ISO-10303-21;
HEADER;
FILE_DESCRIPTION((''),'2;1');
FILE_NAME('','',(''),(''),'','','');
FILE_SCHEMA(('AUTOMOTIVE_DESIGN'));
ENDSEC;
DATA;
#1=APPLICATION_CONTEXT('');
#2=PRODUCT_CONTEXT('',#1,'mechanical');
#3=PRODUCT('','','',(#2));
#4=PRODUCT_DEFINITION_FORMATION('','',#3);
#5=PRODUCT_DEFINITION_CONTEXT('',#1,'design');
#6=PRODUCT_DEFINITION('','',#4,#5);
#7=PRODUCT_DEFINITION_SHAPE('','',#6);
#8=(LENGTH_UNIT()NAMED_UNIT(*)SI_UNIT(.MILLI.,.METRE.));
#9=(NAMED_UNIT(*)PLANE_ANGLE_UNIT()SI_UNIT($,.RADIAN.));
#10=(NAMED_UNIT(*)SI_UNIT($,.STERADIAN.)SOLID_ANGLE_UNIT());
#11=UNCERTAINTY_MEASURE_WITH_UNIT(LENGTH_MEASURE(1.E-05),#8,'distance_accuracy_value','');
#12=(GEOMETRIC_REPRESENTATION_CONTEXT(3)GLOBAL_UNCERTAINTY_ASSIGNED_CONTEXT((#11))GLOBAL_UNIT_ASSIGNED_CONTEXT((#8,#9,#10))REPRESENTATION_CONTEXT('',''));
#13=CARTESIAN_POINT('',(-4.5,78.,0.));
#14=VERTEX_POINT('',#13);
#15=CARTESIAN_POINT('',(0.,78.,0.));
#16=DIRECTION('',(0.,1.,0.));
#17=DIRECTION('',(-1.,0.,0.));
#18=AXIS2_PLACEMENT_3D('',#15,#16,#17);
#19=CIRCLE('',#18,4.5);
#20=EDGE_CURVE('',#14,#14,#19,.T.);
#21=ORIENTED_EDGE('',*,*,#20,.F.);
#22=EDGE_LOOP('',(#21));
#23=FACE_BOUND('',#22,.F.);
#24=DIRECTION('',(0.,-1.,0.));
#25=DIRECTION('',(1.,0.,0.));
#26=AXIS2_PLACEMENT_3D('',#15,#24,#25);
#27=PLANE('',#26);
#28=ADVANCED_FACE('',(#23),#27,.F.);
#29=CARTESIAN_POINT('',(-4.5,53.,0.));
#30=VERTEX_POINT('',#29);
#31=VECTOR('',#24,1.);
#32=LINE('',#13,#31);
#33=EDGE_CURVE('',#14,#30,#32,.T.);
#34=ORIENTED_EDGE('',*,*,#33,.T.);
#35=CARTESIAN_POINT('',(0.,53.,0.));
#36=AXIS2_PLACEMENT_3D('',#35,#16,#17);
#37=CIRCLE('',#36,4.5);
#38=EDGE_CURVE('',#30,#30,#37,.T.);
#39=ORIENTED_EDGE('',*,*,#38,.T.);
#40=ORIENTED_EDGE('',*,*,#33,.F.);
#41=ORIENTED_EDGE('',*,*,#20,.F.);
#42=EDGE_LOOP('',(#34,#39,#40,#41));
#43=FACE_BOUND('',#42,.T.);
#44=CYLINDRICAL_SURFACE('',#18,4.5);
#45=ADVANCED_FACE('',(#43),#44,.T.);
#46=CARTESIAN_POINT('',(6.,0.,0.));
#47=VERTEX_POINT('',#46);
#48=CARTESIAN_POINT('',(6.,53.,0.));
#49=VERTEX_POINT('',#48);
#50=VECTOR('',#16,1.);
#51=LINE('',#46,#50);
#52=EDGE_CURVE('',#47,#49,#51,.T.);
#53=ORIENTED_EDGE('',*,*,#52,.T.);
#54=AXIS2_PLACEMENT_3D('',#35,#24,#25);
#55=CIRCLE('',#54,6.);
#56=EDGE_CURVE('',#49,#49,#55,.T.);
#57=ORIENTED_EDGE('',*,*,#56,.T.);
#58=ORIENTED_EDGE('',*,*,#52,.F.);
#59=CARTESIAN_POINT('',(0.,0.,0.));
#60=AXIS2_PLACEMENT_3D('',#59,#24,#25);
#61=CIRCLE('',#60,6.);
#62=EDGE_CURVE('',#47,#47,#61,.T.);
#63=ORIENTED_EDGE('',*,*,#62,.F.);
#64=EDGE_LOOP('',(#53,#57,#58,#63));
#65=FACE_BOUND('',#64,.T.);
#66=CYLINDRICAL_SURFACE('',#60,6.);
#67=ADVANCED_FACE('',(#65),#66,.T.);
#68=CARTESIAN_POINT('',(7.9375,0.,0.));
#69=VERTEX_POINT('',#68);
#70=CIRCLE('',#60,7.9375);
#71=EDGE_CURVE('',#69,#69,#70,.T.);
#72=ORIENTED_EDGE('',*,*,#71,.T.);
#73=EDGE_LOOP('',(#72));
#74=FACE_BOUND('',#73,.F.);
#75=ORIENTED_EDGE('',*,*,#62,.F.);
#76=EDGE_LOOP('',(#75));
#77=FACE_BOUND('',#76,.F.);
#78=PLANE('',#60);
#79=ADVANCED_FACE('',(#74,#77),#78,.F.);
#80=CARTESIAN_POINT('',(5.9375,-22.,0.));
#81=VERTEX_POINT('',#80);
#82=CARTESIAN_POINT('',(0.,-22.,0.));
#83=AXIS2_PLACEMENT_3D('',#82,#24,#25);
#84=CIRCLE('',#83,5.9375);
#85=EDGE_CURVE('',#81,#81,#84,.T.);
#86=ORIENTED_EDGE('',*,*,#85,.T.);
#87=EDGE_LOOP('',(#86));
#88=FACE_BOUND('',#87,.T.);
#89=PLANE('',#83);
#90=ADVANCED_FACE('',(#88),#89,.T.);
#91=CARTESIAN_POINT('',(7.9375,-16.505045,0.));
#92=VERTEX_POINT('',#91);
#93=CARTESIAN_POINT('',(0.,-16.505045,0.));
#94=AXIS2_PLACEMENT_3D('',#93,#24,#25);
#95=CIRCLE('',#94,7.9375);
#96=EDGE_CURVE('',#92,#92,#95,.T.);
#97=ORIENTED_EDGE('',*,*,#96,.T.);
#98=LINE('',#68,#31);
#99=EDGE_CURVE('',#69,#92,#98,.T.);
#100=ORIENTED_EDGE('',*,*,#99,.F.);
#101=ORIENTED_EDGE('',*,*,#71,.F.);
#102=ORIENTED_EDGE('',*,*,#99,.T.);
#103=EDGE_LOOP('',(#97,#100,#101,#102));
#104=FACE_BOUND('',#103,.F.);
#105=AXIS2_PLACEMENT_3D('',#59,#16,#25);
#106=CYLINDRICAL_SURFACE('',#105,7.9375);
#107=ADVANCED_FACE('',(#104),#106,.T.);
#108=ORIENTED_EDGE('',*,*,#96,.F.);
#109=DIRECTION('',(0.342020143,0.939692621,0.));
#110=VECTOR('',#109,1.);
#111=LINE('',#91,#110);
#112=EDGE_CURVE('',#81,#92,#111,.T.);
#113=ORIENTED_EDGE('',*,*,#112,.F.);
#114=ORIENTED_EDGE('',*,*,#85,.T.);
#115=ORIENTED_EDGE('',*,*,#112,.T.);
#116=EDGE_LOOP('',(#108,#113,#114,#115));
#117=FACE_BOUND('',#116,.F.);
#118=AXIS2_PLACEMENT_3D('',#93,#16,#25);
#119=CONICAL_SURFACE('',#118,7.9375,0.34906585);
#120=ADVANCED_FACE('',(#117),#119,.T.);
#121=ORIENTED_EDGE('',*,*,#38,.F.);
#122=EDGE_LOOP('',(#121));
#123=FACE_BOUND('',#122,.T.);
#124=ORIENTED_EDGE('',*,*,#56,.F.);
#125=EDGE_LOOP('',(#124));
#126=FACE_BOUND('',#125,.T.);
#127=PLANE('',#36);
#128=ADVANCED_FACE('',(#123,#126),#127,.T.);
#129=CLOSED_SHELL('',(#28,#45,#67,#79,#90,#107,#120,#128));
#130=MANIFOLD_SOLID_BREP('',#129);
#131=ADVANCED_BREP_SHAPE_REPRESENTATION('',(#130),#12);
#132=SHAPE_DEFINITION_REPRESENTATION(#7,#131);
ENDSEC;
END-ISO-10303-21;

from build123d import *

# Parameters (mm, degrees)
F0_R     = 7.9375
F1_DEPTH = 22
F2_R     = 6
F3_DEPTH = 78
F4_R     = 6
F4_R_2   = 4.5
F5_DEPTH = 25
F6_SIZE2 = 5.4949548389
F6_SIZE  = 2


# Not quite as in the source:
# - a feature names something its author has since deleted; it is built from what else it names


with BuildPart() as f1:
    # F0 (on Front) → F1 (new body)
    with BuildSketch(Plane.XZ):
        Circle(F0_R)
    extrude(amount=F1_DEPTH)

    # F2 (on Front) → F3 (join)
    with BuildSketch(Plane.XZ):
        Circle(F2_R)
    extrude(amount=-F3_DEPTH)

    # F4 (on face) → F5 (cut)
    with BuildSketch(Plane(origin=(0, 78, 0), x_dir=(-1, 0, 0), z_dir=(0, 1, 0))):
        Circle(F4_R)
        Circle(F4_R_2, mode=Mode.SUBTRACT)
    extrude(amount=-F5_DEPTH, mode=Mode.SUBTRACT)

    # F6
    f6_edges = [f1.edges().sort_by_distance(p)[0] for p in [
        (-7.9375, -22, 0),
    ]]
    f6_side = f1.faces().sort_by_distance((0, -22, 0))[0]
    chamfer(f6_edges, length=F6_SIZE, length2=F6_SIZE2, reference=f6_side)


solid = f1.part
